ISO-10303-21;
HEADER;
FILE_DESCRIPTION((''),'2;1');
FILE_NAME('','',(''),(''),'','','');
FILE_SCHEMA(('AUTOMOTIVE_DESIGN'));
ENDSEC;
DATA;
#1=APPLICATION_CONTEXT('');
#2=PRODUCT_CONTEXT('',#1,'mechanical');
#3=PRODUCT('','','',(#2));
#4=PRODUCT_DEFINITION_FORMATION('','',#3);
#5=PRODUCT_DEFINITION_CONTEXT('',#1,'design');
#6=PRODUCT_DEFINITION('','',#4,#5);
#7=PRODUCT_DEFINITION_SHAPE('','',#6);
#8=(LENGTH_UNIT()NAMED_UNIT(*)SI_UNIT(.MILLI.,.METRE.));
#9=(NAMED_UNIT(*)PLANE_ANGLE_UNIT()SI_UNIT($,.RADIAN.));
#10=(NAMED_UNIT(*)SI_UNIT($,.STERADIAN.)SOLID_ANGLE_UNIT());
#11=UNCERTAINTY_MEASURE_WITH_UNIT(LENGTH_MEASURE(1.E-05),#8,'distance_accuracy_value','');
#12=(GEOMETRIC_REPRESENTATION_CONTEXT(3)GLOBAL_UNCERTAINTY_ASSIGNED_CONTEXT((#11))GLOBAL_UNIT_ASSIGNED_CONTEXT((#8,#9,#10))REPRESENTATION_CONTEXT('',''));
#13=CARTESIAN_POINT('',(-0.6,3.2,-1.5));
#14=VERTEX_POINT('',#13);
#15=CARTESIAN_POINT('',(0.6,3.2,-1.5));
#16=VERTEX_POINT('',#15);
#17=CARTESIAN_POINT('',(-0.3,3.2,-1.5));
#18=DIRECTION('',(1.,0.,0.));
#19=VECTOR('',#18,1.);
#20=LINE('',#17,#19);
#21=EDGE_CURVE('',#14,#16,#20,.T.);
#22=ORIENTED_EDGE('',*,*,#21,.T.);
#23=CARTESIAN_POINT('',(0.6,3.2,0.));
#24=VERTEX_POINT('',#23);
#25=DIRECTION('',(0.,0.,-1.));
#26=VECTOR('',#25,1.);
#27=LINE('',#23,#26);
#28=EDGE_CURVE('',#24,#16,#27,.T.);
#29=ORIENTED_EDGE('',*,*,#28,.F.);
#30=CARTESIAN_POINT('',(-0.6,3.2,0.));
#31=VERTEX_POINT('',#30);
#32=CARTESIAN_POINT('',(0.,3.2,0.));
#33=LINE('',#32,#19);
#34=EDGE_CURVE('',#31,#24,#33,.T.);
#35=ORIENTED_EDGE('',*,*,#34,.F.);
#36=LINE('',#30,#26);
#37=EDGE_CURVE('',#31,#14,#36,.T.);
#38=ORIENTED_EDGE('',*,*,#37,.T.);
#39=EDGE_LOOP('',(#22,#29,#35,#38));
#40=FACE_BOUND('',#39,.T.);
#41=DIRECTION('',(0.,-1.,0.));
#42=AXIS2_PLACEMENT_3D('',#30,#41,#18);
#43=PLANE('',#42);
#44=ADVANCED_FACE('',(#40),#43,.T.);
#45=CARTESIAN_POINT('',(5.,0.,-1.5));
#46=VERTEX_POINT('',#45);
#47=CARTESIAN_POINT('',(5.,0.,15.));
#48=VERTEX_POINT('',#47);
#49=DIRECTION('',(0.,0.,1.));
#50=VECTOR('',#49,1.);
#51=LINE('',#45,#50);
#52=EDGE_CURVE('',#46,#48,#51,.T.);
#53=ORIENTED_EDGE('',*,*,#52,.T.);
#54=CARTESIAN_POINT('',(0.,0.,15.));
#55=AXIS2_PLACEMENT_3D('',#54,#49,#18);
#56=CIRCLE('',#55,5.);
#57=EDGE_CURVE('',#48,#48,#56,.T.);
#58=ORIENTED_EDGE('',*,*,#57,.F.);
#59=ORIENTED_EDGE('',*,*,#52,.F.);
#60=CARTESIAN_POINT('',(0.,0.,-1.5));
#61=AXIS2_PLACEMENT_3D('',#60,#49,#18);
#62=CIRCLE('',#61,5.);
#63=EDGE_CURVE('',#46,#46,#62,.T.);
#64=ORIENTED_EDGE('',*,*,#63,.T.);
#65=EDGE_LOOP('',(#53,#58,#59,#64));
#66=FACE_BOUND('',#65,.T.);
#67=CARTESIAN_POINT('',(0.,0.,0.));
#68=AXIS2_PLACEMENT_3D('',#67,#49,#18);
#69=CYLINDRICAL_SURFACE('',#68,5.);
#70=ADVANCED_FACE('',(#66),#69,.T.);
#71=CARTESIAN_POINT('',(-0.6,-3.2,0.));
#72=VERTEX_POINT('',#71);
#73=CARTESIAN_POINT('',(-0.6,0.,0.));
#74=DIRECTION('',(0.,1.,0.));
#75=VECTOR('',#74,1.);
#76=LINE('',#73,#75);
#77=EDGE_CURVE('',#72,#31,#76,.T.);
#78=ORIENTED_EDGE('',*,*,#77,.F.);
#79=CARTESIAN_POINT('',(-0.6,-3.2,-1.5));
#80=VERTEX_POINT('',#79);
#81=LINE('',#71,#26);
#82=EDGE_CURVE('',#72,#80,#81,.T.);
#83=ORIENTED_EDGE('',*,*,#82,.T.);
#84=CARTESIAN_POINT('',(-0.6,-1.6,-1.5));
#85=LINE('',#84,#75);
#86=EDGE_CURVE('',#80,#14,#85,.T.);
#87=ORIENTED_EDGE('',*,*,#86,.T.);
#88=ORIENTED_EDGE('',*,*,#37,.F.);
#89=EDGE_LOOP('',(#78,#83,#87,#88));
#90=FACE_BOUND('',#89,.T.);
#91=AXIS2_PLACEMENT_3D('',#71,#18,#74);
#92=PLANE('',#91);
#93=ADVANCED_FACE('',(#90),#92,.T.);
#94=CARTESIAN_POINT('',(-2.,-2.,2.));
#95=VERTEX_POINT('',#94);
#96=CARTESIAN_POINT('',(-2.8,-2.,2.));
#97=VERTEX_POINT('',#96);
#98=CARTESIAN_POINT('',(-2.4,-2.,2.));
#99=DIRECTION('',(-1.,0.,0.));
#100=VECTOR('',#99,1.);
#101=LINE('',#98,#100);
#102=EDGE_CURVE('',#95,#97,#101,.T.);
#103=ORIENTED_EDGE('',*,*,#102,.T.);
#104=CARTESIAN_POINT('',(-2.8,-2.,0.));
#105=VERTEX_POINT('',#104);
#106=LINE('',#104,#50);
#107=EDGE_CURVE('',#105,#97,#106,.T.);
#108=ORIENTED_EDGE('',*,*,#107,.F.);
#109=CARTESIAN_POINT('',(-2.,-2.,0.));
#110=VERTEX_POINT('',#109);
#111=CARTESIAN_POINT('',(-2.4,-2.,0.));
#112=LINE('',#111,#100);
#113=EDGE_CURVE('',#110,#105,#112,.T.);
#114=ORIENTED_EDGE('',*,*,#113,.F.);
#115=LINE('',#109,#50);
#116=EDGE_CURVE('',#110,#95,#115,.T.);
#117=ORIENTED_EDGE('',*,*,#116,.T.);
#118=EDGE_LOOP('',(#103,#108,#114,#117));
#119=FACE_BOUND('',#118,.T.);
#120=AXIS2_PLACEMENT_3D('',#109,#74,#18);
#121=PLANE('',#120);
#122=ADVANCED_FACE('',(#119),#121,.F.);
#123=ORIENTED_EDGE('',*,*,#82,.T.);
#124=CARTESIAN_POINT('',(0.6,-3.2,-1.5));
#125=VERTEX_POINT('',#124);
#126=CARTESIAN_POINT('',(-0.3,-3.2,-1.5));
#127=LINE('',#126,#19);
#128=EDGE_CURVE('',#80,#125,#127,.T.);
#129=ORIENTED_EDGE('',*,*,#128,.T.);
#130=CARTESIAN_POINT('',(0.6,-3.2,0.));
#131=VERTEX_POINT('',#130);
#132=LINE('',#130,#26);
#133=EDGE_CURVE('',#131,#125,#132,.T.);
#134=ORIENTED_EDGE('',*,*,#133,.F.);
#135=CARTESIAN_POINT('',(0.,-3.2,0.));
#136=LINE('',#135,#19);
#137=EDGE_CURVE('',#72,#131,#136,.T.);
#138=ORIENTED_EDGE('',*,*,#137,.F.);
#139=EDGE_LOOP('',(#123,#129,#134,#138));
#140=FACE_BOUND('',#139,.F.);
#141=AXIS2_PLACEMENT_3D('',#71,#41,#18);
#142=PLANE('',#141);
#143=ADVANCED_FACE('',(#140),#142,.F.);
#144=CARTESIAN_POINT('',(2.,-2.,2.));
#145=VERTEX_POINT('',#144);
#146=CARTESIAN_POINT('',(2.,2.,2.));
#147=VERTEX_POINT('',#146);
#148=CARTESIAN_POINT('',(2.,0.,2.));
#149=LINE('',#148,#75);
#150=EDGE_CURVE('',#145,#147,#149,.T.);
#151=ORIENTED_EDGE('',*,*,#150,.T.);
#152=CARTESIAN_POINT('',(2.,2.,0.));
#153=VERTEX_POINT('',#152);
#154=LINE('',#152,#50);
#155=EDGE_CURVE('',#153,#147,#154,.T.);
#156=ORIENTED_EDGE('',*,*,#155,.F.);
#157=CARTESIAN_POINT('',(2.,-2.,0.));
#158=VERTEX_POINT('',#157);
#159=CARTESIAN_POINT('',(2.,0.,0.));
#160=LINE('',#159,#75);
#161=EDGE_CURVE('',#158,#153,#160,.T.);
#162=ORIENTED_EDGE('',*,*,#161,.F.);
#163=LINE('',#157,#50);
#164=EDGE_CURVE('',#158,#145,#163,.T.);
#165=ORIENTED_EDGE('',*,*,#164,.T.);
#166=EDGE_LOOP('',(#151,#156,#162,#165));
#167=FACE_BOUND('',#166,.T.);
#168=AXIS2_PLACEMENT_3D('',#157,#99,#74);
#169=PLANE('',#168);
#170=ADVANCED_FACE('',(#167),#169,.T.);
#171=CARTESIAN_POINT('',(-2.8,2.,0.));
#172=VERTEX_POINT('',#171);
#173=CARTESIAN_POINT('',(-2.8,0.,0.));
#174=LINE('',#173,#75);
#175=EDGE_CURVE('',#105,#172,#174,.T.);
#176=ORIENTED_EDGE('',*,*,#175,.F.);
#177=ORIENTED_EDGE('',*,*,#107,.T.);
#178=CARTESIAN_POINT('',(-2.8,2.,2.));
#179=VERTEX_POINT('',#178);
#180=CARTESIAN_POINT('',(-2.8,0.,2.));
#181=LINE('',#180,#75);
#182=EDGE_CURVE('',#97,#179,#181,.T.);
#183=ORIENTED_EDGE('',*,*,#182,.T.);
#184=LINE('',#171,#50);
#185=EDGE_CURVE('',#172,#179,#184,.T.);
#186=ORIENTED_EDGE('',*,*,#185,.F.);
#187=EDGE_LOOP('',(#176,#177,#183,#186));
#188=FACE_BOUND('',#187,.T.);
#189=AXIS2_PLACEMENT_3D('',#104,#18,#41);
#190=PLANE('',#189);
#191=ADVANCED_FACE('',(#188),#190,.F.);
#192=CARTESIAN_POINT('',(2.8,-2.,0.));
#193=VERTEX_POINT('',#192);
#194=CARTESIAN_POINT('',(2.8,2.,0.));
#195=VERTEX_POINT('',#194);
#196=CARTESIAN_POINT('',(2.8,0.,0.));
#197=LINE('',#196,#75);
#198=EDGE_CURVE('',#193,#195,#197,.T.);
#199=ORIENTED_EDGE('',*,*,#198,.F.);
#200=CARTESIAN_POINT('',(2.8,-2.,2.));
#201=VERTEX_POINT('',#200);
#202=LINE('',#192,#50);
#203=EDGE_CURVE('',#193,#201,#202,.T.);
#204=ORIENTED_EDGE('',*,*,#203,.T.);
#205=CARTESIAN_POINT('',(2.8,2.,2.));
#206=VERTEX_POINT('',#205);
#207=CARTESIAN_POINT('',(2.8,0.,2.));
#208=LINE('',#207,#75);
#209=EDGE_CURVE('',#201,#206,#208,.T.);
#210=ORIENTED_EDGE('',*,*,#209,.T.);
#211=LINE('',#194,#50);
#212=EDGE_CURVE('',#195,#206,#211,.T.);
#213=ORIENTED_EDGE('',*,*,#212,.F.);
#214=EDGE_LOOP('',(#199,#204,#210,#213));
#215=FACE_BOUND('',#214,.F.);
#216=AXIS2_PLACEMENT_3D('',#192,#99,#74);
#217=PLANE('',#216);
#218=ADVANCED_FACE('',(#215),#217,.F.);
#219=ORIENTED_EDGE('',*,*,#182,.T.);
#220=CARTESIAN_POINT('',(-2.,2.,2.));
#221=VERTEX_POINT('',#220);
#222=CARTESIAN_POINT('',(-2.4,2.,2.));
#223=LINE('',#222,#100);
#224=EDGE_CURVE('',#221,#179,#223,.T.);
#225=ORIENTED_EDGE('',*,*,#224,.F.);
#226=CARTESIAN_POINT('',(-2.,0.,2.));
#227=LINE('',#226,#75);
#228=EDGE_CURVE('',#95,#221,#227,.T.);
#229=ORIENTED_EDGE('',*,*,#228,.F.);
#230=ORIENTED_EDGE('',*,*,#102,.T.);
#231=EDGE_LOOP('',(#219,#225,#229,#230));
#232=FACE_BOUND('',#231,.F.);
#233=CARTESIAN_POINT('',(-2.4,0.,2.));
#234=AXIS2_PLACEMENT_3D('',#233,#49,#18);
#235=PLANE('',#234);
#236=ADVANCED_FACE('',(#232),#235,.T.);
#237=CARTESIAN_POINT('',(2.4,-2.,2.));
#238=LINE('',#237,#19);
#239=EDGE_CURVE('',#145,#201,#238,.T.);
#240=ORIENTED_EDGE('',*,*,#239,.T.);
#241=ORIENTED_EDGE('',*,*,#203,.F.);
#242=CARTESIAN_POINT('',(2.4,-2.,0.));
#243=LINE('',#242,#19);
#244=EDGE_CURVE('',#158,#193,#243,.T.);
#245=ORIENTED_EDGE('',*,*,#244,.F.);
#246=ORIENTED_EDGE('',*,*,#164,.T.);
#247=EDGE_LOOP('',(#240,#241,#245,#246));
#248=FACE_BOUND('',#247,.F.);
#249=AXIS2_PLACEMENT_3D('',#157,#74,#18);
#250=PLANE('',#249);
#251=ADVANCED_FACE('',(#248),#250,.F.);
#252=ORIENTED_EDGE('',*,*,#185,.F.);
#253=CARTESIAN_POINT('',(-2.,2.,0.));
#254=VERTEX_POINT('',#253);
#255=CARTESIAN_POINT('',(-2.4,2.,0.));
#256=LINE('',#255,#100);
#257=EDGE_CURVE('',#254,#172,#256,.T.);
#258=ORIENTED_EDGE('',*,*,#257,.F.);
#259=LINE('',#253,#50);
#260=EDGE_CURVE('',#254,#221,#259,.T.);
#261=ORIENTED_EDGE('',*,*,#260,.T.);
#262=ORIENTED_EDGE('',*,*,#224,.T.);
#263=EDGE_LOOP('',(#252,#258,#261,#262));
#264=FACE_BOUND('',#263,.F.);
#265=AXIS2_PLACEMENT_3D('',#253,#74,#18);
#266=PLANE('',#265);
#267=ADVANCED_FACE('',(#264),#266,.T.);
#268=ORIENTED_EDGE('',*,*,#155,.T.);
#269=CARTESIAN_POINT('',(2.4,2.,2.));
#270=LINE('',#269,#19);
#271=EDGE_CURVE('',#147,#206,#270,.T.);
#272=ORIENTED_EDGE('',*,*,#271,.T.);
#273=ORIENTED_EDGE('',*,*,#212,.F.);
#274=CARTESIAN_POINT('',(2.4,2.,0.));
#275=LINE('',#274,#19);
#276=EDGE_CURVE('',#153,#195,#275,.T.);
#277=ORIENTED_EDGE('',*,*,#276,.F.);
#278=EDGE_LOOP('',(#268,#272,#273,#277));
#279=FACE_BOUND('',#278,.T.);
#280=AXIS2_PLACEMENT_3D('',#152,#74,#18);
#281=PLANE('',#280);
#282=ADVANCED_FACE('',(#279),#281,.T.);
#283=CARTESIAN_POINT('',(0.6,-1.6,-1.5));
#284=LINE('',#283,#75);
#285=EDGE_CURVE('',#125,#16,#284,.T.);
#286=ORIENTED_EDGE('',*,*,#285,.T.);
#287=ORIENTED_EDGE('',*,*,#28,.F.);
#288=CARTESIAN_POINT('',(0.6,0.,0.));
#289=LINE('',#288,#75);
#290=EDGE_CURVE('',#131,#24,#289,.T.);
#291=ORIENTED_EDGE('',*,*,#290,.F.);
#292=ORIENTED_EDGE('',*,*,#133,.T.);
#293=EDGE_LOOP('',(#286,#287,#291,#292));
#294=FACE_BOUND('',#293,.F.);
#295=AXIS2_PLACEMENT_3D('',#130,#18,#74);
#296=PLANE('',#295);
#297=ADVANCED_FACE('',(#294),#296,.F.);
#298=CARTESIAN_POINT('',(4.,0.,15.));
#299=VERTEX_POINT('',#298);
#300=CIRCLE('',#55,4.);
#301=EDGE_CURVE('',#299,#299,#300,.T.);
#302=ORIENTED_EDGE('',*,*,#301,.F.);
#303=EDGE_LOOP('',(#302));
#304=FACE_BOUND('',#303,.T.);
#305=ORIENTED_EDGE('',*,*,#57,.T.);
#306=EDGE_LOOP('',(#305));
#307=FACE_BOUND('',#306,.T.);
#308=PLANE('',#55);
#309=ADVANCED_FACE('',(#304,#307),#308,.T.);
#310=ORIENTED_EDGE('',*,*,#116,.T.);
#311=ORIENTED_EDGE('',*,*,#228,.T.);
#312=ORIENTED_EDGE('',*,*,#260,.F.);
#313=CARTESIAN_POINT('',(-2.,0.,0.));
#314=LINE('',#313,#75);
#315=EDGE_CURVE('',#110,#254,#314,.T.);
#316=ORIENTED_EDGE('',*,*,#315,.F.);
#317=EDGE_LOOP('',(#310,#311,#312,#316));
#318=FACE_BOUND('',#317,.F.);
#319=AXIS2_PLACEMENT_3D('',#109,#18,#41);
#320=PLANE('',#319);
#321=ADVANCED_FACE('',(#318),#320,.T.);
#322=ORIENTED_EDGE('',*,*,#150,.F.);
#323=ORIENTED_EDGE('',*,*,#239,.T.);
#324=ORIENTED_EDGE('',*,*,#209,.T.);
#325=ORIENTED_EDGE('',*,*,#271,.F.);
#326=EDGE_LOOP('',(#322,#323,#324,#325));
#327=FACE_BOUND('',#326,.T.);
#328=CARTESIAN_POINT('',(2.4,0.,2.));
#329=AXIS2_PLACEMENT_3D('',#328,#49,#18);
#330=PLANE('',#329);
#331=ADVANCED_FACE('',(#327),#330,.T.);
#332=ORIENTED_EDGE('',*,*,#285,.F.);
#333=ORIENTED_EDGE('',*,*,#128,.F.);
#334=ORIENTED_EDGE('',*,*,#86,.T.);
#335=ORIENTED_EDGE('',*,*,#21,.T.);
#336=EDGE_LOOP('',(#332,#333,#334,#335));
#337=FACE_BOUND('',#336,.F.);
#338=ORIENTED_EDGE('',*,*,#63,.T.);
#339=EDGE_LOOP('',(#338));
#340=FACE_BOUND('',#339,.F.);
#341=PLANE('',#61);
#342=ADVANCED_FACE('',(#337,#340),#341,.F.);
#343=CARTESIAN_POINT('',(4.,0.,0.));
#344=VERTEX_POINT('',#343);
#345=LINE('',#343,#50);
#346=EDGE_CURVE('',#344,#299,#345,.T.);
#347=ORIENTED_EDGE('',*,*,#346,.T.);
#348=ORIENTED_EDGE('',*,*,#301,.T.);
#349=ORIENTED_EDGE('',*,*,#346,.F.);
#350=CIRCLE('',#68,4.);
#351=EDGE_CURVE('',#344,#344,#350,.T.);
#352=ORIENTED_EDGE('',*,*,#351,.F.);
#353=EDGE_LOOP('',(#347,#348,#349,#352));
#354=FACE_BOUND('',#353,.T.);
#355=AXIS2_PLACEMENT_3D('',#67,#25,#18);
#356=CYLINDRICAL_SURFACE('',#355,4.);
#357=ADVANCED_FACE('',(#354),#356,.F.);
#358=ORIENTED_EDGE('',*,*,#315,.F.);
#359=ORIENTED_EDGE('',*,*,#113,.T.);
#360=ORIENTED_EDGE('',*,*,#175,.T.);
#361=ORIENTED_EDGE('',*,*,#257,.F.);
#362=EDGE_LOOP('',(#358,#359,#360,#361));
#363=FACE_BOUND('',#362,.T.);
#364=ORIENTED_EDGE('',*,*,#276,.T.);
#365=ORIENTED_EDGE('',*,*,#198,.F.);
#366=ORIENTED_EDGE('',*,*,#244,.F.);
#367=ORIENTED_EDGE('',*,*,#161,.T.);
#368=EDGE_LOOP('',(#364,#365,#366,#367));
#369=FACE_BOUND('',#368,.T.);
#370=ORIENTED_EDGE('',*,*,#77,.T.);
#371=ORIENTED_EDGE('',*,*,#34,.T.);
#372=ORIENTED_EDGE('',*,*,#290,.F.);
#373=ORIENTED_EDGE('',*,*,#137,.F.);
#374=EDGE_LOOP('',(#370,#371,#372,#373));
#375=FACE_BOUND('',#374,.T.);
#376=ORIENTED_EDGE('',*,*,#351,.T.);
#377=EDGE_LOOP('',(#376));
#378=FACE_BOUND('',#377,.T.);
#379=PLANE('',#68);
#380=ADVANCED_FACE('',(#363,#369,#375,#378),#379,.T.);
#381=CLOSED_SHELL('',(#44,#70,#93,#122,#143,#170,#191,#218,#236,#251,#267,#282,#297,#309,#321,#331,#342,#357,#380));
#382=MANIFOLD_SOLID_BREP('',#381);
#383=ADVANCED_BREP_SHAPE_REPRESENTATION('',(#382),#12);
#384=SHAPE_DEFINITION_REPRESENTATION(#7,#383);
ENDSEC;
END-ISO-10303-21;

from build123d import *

# Parameters (mm, degrees)
F0_R     = 5
F0_R_2   = 4
F1_DEPTH = 15
F2_R     = 5
F3_DEPTH = 1.5
F4_W     = 1.2
F4_H     = 6.4
F5_DEPTH = 2
F6_W     = 0.8
F6_H     = 4
F7_DEPTH = 2


# Not quite as in the source:
# - a pattern or mirror of a feature is missing from the dataset's text; its kind, count and spacing are read off the source's solid


with BuildPart() as f1:
    # F0 (on Top) → F1 (new body)
    with BuildSketch(Plane.XY):
        Circle(F0_R)
        Circle(F0_R_2, mode=Mode.SUBTRACT)
    extrude(amount=F1_DEPTH)

    # F2 (on Top) → F3 (join)
    with BuildSketch(Plane.XY):
        Circle(F2_R)
    extrude(amount=-F3_DEPTH)

    # F4 (on Top) → F5 (cut)
    with BuildSketch(Plane.XY):
        Rectangle(F4_W, F4_H)
    extrude(amount=-F5_DEPTH, mode=Mode.SUBTRACT)

    # F6 (on Top) → F7 (join)
    with BuildSketch(Plane.XY):
        with Locations((2.4, 0)):
            Rectangle(F6_W, F6_H)
    f7 = extrude(amount=F7_DEPTH)

    # F7_copies: F7 across plane
    add(f7.mirror(Plane(origin=(0, 0, 0), x_dir=(0, 0, -1), z_dir=(-1, 0, 0))))


solid = f1.part
